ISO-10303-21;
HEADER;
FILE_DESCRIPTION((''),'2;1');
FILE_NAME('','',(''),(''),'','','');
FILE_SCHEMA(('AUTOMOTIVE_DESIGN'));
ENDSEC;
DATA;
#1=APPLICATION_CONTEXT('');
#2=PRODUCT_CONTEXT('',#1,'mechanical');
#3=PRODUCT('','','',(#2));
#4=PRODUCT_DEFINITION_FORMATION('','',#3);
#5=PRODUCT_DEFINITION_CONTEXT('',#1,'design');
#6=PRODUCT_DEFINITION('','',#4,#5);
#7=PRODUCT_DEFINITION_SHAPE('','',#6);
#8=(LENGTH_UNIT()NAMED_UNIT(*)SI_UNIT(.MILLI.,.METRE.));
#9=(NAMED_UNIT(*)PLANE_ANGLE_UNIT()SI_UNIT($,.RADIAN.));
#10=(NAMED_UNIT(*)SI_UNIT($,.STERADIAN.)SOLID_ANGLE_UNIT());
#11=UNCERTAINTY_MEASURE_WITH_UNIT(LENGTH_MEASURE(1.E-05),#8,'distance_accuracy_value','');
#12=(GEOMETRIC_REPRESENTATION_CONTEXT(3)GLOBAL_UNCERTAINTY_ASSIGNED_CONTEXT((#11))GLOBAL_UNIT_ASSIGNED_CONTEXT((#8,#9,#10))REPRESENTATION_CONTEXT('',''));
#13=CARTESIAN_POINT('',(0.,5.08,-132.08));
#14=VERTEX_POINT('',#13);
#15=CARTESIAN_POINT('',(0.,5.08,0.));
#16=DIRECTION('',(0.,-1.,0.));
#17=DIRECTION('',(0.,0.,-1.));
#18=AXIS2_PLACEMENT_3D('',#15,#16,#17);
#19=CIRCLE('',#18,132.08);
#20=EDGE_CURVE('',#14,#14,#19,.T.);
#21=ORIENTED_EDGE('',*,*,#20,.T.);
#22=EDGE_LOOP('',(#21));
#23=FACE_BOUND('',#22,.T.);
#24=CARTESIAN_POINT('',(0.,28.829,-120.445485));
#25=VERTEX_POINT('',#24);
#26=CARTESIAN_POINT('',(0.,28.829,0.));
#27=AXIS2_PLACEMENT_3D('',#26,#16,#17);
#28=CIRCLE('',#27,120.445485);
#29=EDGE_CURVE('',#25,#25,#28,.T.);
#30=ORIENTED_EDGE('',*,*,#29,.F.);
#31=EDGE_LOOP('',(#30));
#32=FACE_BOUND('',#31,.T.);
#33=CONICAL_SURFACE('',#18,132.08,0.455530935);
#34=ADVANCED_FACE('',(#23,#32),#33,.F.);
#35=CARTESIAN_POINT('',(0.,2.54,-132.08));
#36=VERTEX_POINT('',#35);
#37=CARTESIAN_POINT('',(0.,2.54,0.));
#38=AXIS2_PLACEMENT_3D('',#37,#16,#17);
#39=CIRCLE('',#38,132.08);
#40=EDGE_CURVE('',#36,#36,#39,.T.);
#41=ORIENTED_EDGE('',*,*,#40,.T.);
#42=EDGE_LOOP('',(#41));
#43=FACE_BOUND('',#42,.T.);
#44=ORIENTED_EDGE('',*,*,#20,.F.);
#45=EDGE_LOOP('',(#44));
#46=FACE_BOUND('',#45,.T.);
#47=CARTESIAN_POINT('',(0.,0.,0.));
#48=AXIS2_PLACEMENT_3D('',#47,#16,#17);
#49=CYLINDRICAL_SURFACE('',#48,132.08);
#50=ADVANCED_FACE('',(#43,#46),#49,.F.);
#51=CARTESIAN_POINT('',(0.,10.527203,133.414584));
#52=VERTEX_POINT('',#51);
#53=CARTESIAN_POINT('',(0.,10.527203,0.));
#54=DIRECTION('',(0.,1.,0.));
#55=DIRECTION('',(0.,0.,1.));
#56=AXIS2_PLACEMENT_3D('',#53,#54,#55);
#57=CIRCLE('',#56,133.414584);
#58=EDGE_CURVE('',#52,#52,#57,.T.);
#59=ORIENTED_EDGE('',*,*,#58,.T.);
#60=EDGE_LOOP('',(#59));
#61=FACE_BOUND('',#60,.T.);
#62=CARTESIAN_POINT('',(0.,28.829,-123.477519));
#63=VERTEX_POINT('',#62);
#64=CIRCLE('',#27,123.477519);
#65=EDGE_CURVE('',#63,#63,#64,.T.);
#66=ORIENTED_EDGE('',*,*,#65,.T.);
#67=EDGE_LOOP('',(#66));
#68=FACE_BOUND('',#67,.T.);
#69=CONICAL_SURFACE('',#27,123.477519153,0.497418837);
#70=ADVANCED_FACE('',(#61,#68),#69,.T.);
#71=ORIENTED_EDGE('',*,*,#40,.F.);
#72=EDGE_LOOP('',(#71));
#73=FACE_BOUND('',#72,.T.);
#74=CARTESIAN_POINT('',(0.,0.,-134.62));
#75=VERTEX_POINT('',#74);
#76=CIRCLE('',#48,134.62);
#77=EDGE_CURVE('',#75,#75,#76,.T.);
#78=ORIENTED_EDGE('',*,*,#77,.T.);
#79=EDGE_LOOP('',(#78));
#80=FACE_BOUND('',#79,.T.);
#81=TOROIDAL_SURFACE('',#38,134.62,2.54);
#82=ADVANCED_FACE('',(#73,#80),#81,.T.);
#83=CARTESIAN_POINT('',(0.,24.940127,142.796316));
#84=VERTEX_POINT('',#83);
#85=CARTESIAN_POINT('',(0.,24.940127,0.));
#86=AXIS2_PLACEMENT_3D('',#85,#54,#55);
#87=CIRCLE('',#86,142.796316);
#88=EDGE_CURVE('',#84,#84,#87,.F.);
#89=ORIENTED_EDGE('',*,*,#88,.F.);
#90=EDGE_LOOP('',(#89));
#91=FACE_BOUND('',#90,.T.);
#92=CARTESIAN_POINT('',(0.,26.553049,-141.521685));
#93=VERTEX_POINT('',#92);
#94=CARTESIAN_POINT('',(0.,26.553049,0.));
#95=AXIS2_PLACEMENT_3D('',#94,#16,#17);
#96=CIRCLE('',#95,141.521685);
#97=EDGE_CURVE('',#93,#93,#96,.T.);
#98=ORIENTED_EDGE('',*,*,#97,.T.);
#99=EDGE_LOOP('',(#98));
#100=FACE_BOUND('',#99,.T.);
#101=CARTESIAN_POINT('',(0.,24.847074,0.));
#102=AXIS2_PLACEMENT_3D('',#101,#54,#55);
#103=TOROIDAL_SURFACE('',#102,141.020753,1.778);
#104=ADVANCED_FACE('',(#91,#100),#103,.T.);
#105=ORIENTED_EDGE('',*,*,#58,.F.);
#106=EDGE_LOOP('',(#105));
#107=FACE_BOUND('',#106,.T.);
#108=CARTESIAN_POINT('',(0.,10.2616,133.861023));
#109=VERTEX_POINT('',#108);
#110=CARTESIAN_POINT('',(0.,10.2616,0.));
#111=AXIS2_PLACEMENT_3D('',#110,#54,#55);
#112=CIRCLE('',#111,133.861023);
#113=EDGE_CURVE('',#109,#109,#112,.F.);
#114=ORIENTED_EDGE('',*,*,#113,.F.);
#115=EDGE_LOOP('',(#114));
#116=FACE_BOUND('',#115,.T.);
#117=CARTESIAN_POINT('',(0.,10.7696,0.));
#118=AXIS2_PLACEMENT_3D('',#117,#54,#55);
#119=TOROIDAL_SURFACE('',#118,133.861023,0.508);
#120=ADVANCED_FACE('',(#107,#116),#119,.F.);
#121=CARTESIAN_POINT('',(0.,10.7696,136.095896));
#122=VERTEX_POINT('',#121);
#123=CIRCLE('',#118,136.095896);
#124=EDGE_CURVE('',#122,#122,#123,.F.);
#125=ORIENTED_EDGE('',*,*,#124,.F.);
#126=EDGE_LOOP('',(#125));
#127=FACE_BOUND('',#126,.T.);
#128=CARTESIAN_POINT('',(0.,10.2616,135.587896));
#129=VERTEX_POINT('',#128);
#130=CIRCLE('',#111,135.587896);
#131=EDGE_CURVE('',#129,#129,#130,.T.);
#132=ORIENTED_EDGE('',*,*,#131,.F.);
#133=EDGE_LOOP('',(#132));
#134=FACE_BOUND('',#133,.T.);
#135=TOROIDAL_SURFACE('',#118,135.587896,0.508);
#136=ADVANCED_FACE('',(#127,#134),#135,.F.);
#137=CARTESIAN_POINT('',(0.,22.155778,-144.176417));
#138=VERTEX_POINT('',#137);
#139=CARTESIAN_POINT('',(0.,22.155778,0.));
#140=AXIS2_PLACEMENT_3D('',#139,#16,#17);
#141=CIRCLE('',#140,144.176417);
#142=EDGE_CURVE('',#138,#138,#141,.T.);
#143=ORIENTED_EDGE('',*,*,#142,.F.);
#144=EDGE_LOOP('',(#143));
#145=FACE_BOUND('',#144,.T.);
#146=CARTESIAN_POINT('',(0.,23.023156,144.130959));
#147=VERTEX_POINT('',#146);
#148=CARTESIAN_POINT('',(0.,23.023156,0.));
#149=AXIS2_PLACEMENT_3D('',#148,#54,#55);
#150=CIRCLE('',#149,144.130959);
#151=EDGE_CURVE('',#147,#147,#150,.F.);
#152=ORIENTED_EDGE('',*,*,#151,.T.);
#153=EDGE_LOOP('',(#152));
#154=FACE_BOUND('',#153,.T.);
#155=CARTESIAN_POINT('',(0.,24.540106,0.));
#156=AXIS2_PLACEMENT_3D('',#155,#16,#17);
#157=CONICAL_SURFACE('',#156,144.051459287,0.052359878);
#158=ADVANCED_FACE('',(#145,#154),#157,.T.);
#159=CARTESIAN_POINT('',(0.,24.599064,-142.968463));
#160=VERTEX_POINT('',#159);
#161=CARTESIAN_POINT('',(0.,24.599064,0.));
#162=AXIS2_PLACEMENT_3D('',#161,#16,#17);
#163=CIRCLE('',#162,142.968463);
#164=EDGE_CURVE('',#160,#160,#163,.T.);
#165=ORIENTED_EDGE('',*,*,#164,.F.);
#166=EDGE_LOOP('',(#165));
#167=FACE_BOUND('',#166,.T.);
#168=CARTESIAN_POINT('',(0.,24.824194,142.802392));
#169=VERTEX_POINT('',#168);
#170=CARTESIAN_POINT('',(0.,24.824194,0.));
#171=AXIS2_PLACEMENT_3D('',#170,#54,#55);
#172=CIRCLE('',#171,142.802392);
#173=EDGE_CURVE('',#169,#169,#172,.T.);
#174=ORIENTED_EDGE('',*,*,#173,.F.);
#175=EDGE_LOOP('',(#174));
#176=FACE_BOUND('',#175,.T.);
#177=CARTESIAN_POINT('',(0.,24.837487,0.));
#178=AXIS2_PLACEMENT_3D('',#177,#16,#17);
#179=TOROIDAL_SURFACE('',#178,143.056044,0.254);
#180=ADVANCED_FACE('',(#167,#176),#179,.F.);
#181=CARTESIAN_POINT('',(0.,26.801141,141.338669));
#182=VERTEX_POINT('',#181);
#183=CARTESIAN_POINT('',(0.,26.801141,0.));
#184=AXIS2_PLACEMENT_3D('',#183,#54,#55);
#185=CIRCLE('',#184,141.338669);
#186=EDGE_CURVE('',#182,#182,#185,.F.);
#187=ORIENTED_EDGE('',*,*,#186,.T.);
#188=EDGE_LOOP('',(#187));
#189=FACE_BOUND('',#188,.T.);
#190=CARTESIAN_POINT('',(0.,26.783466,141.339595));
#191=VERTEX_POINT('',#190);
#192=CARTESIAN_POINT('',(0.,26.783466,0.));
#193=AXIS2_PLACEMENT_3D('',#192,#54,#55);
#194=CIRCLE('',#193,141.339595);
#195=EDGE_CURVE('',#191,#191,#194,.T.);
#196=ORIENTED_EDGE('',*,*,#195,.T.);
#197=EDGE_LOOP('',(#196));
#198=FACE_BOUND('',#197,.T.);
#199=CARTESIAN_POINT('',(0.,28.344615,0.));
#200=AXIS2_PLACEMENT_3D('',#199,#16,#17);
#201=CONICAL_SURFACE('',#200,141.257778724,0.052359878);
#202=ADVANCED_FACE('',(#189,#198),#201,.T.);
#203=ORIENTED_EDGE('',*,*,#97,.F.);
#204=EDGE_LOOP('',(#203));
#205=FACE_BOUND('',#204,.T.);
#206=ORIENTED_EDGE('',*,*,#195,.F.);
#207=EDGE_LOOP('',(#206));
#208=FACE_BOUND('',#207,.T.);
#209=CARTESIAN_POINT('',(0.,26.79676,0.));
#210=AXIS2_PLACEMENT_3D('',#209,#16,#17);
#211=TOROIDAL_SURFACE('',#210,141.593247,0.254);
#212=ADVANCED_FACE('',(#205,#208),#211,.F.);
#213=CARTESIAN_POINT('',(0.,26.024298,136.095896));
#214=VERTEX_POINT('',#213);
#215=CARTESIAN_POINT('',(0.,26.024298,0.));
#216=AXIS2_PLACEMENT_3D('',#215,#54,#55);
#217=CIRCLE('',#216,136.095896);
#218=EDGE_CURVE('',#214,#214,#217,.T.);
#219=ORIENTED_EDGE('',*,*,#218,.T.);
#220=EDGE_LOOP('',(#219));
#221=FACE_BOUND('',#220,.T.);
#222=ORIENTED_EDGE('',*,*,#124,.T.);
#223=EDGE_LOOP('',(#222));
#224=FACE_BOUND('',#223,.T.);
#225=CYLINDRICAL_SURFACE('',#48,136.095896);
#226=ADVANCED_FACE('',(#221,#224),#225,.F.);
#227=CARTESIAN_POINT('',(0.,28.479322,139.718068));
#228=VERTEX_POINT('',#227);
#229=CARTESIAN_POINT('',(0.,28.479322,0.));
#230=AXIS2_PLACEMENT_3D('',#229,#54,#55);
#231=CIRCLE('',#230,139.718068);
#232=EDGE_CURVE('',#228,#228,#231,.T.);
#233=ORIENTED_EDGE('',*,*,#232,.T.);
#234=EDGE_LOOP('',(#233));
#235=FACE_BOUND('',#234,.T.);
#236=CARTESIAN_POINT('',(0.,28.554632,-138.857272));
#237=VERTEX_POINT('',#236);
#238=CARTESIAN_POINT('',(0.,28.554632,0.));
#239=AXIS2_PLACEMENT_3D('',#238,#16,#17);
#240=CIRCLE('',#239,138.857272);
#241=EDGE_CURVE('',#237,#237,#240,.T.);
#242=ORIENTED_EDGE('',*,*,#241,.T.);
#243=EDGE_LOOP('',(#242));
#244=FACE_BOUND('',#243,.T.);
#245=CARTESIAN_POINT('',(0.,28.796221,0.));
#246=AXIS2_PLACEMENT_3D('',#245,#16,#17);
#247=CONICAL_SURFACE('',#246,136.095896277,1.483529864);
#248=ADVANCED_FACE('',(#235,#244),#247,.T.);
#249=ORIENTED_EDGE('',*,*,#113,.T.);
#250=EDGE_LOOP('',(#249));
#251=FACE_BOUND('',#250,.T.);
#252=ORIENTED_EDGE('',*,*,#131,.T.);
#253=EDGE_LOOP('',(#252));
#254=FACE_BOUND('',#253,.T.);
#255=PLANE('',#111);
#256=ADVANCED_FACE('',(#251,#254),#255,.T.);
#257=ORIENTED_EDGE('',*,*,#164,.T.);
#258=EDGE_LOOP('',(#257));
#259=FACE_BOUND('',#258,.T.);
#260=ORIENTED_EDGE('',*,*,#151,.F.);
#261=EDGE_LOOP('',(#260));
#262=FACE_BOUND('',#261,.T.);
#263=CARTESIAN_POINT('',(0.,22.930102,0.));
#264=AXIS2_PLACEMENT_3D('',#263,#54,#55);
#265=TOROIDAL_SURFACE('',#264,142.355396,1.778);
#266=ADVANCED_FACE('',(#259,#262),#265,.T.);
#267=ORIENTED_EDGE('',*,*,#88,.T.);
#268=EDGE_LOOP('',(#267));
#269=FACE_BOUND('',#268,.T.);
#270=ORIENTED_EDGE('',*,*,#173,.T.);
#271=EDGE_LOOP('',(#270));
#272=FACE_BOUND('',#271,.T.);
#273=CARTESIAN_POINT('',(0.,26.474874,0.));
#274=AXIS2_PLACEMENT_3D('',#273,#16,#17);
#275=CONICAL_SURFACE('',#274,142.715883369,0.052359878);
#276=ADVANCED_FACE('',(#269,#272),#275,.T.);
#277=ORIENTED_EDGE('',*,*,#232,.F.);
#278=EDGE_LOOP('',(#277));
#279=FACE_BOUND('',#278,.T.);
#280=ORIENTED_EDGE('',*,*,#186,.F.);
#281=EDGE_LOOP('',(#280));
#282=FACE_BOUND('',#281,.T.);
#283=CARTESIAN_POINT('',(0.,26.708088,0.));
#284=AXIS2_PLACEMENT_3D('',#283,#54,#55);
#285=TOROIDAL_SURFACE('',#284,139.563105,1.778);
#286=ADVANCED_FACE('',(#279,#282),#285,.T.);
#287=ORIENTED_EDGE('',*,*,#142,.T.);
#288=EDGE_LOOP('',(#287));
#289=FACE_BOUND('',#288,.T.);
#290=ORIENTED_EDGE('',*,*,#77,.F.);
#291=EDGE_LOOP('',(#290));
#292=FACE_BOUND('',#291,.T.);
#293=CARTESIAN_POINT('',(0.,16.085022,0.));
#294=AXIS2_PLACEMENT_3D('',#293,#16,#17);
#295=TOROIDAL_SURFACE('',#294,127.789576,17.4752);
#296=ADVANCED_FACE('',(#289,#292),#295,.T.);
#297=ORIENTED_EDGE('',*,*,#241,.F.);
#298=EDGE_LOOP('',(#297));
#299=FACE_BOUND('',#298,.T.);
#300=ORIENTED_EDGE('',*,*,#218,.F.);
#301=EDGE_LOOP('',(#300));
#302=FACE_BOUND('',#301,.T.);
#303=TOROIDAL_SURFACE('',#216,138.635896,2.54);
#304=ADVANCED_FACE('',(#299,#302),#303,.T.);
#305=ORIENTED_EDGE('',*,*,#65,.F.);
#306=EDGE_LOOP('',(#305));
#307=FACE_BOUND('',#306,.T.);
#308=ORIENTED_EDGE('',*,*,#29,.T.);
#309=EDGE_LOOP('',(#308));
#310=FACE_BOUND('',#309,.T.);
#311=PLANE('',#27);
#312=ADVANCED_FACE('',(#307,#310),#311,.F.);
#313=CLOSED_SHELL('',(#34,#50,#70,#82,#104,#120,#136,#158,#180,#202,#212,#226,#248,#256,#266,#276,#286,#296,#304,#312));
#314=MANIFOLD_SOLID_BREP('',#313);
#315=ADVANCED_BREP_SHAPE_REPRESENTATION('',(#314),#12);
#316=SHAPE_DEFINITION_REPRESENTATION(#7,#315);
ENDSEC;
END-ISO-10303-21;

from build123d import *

# Parameters (mm, degrees)
FILLET1_R = 0.508
FILLET2_R = 2.54
FILLET3_R = 1.778
FILLET4_R = 0.254


with BuildPart() as part:
    # Sketch1 → Revolve1 (revolve)
    with BuildSketch(Plane.XY, mode=Mode.PRIVATE) as revolve1_sk:
        with BuildLine():
            ThreePointArc((-134.61999999999998, 6.22e-15), (-132.82394877578616, 0.7439487757861636), (-132.08, 2.539999999999967))
            Line((-132.08, 2.539999999999967), (-132.08, 5.07999999999995))
            Line((-132.08, 5.07999999999995), (-120.44548495066127, 28.82899999999998))
            Line((-120.44548495066127, 28.82899999999998), (-123.47751915283212, 28.828999999999994))
            Line((-123.47751915283212, 28.828999999999994), (-133.5587948102957, 10.26159999999998))
            Line((-133.5587948102957, 10.261599999999982), (-136.09589627678233, 10.261599999999978))
            Line((-136.09589627678233, 10.26159999999998), (-136.09589627678233, 28.796221133435314))
            Line((-136.09589627678233, 28.796221133435314), (-141.2577787244145, 28.34461493681401))
            Line((-141.2577787244145, 28.34461493681401), (-141.34950272132588, 26.594416814203147))
            Line((-141.34950272132588, 26.594416814203147), (-142.71588336922852, 26.474873997450448))
            Line((-142.71588336922852, 26.474873997450448), (-142.8115953660056, 24.648580304291283))
            Line((-142.8115953660056, 24.648580304291283), (-144.05145928725057, 24.540106266867536))
            Line((-144.05145928725057, 24.540106266867536), (-144.1764166163762, 22.155778389687516))
            ThreePointArc((-144.1764166163762, 22.15577838968752), (-143.83575863309818, 9.163847678671385), (-134.61999999999998, -3.55e-15))
        make_face()
    revolve(revolve1_sk.sketch.rotate(Axis((0, 0, 0), (0, 1, 0)), 270), axis=Axis((0, 0, 0), (0, 1, 0)))

    # Fillet1
    fillet1_edges = [part.edges().sort_by_distance(p)[0] for p in [
        (-4.689e-14, 10.26159999999998, 136.09589627678233),
        (-4.601e-14, 10.26159999999998, 133.5587948102957),
    ]]
    fillet(fillet1_edges, radius=FILLET1_R)

    # Fillet2
    fillet2_edges = [part.edges().sort_by_distance(p)[0] for p in [
        (-4.689e-14, 28.796221133435314, 136.09589627678233),
    ]]
    fillet(fillet2_edges, radius=FILLET2_R)

    # Fillet3
    # the kernel refuses this fillet: 1.778 mm, written as the material it takes off along each edge
    with BuildSketch(Plane(origin=(0, 24.540106266867536, 0), x_dir=(2.2e-16, 0, -1), z_dir=(1, 0, 2.2e-16))) as fillet3_piece_1:
        with BuildLine():
            CenterArc((142.35539598051716, -1.6100038125103815), FILLET3_R, 2.999999999999552, 72.13276738690263)
            Line((144.13095929331078, -1.5169504823104418), (144.16647055956665, -1.5150894157064414))
            Line((144.16647055956665, -1.5150894157064414), (144.08697055350643, 0.00186106660400043))
            Line((144.08697055350643, 0.00186106660400043), (144.05455854546267, 0.03542468346414296))
            ThreePointArc((144.05455854546267, 0.03542468346414296), (143.43462658483938, 0.08966170217608749), (142.82071935371286, 0.14284359441293049))
            Line((142.82071935371286, 0.14284359441293049), (142.81159536600313, 0.10847403741443529))
        make_face()
    fillet3_piece_1_solid = revolve(axis=Axis((0, 24.540106266867536, 0), (0, 1, 0)), mode=Mode.PRIVATE)
    with BuildSketch(Plane(origin=(0, 26.474873997450448, 0), x_dir=(2.2e-16, 0, -1), z_dir=(1, 0, 2.2e-16))) as fillet3_piece_2:
        with BuildLine():
            CenterArc((141.0207527290087, -1.6278001497400005), FILLET3_R, 2.999999999999666, 76.34477015301434)
            Line((142.79631604180233, -1.5347468195400573), (142.8318273080582, -1.532885752936057))
            Line((142.8318273080582, -1.532885752936057), (142.7513946354844, 0.00186106660400043))
            Line((142.7513946354844, 0.00186106660400043), (142.71898262744062, 0.03542468346414296))
            ThreePointArc((142.71898262744062, 0.03542468346414296), (142.0357923034893, 0.09519609184049216), (141.35607772117223, 0.15448967608254094))
            Line((141.35607772117223, 0.15448967608254094), (141.34950272132588, 0.11954281675268774))
        make_face()
    fillet3_piece_2_solid = revolve(axis=Axis((0, 26.474873997450448, 0), (0, 1, 0)), mode=Mode.PRIVATE)
    with BuildSketch(Plane(origin=(0, 28.34461493681401, 0), x_dir=(2.2e-16, 0, -1), z_dir=(1, 0, 2.2e-16))) as fillet3_piece_3:
        with BuildLine():
            CenterArc((141.2577787244145 - FILLET3_R * 0.953134582082, -FILLET3_R * 0.920431366797), FILLET3_R, 3.000000000000009, 81.9999999999996)
            Line((141.2577787244145 + FILLET3_R * 0.0454949526729, -FILLET3_R * 0.868095410554), (141.2577787244145 + FILLET3_R * 0.065467543368, -FILLET3_R * 0.867048691429))
            Line((141.2577787244145 + FILLET3_R * 0.065467543368, -FILLET3_R * 0.867048691429), (141.2577787244145 + FILLET3_R * 0.0190626916416, FILLET3_R * 0.0184086273359))
            Line((141.2577787244145 + FILLET3_R * 0.0190626916416, FILLET3_R * 0.0184086273359), (141.2577787244145 - FILLET3_R * 0.864235724479, FILLET3_R * 0.0956872252569))
            Line((141.2577787244145 - FILLET3_R * 0.864235724479, FILLET3_R * 0.0956872252569), (141.2577787244145 - FILLET3_R * 0.865978839334, FILLET3_R * 0.0757633312951))
        make_face()
    fillet3_piece_3_solid = revolve(axis=Axis((0, 28.34461493681401, 0), (0, 1, 0)), mode=Mode.PRIVATE)
    add([fillet3_piece_1_solid, fillet3_piece_2_solid, fillet3_piece_3_solid], mode=Mode.SUBTRACT)

    # Fillet4
    fillet4_edges = [part.edges().sort_by_distance(p)[0] for p in [
        (-4.92e-14, 24.648580304291283, 142.8115953660056),
        (-4.87e-14, 26.594416814203147, 141.34950272132588),
    ]]
    fillet(fillet4_edges, radius=FILLET4_R)


solid = part.part
